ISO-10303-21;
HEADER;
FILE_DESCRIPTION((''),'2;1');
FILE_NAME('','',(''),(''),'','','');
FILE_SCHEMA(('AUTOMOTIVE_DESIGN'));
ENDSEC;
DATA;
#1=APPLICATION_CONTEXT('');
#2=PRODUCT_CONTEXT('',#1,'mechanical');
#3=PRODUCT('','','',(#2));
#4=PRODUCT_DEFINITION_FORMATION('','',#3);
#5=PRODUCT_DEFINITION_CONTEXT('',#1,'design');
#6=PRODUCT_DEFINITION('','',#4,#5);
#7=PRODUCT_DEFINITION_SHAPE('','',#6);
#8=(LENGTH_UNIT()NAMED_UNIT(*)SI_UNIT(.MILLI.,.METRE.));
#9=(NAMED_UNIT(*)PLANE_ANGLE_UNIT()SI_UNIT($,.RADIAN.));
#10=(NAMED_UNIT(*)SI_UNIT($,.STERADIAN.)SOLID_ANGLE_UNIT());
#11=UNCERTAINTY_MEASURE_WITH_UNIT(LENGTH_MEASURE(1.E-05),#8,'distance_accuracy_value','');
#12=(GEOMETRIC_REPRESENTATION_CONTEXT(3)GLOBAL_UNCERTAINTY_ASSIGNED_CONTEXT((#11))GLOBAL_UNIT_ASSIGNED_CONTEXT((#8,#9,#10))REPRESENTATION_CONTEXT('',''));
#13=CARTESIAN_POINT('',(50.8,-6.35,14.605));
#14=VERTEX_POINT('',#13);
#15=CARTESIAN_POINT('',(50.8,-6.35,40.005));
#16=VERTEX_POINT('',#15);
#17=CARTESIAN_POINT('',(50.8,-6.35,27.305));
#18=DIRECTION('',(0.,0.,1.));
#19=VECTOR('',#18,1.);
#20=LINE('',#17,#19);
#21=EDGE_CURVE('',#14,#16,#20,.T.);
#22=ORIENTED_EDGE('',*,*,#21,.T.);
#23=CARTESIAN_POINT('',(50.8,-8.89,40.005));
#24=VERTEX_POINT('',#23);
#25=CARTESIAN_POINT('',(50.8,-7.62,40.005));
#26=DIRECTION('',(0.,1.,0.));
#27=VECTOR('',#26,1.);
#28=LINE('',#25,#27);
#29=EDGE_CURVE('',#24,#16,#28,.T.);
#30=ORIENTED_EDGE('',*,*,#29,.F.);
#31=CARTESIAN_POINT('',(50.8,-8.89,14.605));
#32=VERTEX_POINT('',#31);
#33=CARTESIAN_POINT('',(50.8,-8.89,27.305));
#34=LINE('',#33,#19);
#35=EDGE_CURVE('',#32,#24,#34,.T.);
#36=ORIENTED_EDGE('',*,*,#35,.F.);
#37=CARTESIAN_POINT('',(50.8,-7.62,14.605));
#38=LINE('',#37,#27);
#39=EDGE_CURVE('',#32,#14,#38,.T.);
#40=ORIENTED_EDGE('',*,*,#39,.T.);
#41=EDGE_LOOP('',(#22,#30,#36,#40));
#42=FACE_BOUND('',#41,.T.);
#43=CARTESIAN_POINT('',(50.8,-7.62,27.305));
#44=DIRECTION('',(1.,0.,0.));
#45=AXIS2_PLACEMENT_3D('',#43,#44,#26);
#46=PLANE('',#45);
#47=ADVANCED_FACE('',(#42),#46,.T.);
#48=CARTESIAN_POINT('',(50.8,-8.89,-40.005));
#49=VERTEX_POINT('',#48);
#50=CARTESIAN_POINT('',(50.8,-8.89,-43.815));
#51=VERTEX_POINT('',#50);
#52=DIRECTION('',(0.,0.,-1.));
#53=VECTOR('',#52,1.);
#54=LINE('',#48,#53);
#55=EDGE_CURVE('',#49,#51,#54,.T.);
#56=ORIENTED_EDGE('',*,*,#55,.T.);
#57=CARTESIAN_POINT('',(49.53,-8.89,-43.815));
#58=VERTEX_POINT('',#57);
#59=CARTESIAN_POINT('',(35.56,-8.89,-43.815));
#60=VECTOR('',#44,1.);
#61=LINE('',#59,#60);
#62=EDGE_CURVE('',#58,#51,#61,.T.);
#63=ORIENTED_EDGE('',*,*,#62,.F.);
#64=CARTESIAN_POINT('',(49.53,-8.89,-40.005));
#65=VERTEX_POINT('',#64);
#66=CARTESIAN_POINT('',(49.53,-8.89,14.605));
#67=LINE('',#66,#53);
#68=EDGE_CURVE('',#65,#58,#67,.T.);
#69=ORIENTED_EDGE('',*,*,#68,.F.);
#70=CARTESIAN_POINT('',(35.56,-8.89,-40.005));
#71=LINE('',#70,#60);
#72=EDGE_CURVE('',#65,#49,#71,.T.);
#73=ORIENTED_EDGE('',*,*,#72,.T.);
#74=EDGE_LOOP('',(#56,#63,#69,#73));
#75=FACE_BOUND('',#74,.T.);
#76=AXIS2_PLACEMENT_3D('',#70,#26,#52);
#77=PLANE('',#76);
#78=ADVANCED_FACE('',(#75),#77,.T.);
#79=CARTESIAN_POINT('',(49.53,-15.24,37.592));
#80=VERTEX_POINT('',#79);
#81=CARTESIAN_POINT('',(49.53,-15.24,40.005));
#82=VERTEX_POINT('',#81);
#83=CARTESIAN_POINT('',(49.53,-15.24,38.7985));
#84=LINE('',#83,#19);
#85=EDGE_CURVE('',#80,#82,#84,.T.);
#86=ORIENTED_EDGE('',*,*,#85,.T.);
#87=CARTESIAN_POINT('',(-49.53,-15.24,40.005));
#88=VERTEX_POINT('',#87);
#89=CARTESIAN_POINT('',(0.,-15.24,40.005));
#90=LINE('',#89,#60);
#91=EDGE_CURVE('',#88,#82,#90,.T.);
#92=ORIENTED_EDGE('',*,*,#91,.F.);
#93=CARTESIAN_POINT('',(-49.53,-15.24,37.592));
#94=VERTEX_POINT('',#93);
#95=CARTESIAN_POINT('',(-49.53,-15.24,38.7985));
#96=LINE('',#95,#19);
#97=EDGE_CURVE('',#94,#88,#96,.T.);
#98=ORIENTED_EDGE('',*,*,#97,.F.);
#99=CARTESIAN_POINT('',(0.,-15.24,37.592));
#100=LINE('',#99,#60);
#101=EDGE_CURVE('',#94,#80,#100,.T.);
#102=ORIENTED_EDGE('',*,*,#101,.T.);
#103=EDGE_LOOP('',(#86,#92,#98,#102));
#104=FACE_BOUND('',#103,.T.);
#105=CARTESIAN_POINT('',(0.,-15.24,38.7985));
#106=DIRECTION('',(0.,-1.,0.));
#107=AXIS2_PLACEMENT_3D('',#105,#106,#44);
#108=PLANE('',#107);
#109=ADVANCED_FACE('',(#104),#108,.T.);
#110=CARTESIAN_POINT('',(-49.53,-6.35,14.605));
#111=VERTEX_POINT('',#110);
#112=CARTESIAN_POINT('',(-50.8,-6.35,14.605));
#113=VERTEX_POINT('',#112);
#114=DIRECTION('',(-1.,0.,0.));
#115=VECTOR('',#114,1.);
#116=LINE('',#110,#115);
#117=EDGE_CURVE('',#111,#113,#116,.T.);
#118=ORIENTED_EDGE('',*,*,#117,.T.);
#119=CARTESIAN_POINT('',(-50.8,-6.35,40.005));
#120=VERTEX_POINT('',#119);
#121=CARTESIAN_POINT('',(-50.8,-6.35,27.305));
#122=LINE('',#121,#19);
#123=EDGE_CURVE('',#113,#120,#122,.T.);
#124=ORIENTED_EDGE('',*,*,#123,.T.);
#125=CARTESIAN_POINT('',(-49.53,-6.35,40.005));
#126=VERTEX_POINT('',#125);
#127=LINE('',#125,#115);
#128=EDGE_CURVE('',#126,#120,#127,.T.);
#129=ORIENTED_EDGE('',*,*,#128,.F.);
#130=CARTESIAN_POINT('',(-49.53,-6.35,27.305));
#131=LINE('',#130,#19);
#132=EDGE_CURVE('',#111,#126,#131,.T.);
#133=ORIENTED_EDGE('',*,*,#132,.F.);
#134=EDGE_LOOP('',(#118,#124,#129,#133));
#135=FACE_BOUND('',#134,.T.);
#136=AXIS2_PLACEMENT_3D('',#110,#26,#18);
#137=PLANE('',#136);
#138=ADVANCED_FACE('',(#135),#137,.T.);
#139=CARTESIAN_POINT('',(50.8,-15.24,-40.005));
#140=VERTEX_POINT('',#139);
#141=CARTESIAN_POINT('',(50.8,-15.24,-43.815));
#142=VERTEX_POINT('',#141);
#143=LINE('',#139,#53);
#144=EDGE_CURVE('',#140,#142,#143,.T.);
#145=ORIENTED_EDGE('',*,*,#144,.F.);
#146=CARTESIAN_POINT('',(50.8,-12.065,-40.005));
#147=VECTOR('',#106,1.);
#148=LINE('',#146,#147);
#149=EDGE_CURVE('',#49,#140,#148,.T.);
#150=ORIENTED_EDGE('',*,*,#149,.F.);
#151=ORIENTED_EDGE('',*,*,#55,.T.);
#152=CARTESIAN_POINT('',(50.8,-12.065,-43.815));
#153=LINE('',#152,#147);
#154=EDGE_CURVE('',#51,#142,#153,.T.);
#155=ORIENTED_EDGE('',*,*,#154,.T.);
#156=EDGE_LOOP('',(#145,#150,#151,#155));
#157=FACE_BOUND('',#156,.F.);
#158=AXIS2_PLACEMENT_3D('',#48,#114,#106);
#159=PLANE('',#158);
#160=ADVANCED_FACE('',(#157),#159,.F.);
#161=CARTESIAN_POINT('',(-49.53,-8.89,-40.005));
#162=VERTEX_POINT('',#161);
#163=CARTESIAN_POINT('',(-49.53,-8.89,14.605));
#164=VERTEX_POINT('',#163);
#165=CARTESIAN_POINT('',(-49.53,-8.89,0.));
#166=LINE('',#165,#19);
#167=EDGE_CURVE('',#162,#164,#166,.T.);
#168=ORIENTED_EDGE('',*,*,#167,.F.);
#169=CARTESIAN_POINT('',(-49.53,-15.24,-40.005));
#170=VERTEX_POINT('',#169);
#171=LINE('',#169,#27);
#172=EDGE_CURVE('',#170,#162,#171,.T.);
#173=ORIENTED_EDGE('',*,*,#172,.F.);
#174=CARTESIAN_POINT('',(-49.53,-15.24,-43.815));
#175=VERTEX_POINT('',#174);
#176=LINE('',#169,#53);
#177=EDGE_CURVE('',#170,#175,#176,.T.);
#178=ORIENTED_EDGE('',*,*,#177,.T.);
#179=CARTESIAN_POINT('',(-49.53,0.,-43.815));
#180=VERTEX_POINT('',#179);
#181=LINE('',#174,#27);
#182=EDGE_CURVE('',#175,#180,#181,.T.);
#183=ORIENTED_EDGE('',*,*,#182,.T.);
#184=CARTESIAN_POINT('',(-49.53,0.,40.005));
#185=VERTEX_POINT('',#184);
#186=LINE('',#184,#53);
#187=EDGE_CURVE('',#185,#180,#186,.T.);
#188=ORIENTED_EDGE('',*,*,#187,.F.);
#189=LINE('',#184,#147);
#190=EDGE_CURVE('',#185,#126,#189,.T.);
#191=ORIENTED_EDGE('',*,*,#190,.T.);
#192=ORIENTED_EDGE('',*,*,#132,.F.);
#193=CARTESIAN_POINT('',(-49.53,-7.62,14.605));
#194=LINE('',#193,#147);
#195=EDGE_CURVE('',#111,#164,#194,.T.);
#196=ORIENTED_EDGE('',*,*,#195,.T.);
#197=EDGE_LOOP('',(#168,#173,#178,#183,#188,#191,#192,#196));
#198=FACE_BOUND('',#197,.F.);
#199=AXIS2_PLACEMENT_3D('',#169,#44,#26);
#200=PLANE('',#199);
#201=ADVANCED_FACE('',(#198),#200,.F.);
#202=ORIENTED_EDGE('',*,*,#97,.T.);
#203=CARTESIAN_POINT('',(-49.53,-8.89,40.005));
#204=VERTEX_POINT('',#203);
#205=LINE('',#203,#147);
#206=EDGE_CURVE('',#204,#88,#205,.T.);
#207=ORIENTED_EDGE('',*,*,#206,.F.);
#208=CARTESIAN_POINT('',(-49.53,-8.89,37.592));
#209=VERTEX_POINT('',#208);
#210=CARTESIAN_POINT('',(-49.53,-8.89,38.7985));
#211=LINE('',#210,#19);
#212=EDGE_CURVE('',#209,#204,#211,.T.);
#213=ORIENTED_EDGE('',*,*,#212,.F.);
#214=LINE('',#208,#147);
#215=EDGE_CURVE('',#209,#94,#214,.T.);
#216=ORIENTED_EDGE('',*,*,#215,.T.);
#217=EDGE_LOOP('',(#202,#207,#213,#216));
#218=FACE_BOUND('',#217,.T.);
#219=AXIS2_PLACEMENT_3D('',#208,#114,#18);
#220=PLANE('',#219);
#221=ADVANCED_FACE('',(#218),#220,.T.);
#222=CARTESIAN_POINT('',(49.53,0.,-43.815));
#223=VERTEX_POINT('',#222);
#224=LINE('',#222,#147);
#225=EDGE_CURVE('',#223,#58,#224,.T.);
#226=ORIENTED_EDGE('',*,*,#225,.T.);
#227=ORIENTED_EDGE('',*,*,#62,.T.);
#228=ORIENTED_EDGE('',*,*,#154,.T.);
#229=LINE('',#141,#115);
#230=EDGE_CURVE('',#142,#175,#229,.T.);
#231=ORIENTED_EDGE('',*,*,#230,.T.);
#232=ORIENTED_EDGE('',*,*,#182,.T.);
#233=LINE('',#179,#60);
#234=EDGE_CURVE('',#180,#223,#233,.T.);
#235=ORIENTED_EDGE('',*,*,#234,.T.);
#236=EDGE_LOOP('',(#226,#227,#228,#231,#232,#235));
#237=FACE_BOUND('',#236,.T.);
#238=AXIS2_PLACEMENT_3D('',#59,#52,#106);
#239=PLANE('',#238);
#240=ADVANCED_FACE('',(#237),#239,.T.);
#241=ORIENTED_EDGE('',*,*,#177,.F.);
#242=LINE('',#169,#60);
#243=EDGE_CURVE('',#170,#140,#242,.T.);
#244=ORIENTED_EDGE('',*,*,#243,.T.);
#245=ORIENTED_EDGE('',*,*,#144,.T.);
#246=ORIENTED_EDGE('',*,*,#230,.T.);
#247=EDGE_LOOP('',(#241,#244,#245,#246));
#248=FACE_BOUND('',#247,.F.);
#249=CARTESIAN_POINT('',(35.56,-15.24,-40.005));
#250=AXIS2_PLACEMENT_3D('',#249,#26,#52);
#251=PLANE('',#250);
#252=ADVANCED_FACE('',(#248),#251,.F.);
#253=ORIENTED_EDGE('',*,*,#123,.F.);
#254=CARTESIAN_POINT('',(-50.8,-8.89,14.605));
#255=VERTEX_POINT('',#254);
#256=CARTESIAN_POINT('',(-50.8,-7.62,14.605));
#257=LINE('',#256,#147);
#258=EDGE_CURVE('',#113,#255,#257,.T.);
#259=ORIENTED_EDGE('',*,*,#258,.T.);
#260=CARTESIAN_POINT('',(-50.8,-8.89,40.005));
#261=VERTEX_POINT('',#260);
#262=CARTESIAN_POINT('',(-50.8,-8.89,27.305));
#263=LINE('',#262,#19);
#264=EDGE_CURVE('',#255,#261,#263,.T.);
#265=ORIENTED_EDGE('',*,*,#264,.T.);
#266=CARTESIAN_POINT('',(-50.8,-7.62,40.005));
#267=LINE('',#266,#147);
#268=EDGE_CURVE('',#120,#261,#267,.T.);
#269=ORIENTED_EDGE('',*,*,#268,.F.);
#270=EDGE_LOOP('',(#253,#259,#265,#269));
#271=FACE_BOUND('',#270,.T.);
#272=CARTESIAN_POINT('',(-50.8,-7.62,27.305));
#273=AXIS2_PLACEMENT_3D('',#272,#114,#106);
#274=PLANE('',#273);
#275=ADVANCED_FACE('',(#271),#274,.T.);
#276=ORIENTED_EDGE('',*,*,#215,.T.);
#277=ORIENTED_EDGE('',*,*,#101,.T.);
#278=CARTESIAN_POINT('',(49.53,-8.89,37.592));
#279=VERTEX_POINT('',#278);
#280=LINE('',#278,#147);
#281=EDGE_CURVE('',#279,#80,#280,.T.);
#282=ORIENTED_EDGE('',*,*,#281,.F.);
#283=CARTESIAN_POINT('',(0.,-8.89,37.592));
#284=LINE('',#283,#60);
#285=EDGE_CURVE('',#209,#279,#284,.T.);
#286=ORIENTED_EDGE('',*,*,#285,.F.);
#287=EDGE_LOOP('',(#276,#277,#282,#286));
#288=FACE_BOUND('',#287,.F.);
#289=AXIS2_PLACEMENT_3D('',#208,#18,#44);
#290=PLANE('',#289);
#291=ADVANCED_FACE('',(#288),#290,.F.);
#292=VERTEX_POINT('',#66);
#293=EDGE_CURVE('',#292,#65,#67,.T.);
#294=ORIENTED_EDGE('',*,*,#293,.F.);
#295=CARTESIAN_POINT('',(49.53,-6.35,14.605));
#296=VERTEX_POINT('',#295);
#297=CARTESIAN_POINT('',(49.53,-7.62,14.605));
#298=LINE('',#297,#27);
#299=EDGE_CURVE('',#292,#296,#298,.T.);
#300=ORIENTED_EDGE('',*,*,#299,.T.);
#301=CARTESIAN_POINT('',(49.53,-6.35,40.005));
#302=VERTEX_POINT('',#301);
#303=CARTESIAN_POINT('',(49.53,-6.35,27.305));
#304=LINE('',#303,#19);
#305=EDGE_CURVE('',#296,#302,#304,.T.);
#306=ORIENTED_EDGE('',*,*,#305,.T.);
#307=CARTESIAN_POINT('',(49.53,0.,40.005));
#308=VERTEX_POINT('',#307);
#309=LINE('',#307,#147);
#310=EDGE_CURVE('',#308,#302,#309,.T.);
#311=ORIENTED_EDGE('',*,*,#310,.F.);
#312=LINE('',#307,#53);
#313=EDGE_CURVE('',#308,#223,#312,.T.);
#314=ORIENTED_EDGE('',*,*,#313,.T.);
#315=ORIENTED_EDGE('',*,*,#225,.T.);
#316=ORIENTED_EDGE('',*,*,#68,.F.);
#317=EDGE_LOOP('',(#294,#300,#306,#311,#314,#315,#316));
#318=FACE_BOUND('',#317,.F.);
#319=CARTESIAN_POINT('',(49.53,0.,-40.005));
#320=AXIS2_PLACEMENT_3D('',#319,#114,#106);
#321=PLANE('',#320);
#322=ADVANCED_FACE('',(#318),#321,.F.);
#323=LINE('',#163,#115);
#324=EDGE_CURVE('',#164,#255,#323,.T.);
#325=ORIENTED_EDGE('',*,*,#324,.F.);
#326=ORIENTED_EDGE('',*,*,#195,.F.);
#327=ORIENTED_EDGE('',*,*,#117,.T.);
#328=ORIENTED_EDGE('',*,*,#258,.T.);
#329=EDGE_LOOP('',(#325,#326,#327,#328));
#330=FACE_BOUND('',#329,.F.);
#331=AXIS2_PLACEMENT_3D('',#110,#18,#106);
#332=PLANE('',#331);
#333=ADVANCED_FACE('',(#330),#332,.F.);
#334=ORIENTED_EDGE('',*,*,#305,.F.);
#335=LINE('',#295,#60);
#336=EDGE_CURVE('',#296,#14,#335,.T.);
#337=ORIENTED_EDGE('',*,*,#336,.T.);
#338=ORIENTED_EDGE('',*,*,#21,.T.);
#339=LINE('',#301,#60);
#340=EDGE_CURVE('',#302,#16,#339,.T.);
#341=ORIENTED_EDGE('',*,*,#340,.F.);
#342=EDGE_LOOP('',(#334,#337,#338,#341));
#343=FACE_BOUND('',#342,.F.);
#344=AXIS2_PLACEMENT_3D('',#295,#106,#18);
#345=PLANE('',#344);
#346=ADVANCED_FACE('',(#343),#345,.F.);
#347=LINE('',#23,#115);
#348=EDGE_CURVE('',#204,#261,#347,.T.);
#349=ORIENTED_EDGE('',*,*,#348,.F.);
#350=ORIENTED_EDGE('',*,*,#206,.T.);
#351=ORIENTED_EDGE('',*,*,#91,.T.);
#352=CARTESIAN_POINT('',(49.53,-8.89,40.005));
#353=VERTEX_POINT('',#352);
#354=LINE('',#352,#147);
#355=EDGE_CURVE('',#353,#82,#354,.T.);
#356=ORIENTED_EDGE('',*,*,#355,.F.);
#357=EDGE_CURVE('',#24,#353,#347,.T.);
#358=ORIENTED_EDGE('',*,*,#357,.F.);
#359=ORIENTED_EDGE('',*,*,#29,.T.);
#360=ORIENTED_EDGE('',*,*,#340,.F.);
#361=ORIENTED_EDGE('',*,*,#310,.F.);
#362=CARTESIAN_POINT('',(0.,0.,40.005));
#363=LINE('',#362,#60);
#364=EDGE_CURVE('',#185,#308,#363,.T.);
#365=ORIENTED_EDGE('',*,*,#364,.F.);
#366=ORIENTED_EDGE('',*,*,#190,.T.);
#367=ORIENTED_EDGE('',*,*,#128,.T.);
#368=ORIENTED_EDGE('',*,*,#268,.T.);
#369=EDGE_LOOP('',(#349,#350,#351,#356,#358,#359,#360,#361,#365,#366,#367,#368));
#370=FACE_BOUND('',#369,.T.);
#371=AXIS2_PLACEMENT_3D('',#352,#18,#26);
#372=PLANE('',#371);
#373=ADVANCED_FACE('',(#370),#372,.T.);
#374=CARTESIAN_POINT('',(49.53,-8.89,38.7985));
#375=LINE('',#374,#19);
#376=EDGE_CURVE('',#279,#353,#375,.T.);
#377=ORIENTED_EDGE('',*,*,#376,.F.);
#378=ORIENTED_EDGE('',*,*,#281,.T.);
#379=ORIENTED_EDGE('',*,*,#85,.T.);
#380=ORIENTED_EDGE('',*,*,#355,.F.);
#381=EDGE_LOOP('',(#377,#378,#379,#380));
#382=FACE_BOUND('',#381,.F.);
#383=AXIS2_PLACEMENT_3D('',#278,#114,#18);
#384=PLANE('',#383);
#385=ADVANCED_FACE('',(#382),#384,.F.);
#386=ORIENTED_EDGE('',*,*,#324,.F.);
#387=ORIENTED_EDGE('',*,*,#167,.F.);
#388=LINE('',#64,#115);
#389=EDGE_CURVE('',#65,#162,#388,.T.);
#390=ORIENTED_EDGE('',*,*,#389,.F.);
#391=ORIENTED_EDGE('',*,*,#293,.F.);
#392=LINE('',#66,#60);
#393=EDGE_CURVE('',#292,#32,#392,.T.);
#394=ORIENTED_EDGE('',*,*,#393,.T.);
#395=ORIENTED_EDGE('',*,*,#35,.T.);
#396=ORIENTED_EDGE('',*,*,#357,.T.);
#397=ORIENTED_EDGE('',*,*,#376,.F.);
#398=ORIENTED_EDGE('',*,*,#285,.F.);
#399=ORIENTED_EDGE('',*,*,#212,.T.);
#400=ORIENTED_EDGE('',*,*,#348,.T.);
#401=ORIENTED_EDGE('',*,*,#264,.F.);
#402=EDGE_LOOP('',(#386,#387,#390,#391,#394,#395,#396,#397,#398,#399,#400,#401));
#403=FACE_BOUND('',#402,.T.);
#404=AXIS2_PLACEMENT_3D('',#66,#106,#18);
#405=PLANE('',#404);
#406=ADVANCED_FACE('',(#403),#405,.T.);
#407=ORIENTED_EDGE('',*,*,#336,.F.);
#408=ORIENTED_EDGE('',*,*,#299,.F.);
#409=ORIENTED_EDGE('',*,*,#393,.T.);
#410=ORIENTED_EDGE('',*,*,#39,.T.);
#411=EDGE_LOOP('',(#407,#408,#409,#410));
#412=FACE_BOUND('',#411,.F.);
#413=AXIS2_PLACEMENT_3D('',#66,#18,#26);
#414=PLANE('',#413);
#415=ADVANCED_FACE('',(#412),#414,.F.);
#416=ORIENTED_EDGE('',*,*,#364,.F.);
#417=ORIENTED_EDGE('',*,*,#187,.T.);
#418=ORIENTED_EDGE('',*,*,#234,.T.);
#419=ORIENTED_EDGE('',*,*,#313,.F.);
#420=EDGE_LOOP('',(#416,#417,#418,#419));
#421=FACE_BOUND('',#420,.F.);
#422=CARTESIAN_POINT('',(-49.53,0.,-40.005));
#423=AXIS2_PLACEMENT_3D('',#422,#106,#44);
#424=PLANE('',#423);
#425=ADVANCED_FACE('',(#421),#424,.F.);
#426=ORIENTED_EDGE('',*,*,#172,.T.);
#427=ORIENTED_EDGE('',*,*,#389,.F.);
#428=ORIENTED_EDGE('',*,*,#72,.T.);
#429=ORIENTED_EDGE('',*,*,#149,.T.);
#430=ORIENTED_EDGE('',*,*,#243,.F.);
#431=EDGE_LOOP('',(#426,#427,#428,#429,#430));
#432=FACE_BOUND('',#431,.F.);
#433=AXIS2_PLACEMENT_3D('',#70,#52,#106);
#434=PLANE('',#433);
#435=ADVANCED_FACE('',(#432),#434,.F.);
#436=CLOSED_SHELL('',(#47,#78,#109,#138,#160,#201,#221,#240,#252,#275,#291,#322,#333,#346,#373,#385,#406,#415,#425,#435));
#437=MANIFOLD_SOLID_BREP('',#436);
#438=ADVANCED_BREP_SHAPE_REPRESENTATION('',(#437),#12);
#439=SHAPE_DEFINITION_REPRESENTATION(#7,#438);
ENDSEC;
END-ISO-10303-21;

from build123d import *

# Parameters (mm, degrees)
F0_W      = 99.06
F0_H      = 80.01
F1_DEPTH  = 8.89
F3_W      = 2.54
F3_H      = 25.4
F4_DEPTH  = 1.27
F2_W      = 2.54
F2_H      = 25.4
F5_DEPTH  = 1.27
F6_W      = 85.09
F6_H      = 6.35
F7_DEPTH  = 3.81
F8_W      = 99.06
F8_H      = 2.413
F9_DEPTH  = 6.35
F10_DEPTH = 15.24


# Not quite as in the source:
# - a feature names something its author has since deleted; it is built from what else it names


with BuildPart() as f1:
    # F0 (on Front) → F1 (new body)
    with BuildSketch(Plane.XZ):
        Rectangle(F0_W, F0_H)
    extrude(amount=F1_DEPTH)

    # F3 (on face) → F4 (join)
    with BuildSketch(Plane(origin=(-49.53, 0, 0), x_dir=(0, -1, 0), z_dir=(-1, 0, 0))):
        with Locations((7.62, 27.305)):
            Rectangle(F3_W, F3_H)
    extrude(amount=F4_DEPTH)

    # F2 (on face) → F5 (join)
    with BuildSketch(Plane.YZ.offset(49.53)):
        with Locations((-7.62, 27.305)):
            Rectangle(F2_W, F2_H)
    extrude(amount=F5_DEPTH)

    # F6 (on face) → F7 (join)
    with BuildSketch(Plane(origin=(0, 0, -40.005), x_dir=(1, 0, 0), z_dir=(0, 0, -1))):
        with Locations((-6.985, 12.065)):
            Rectangle(F6_W, F6_H)
        Polygon((35.56, 8.89), (-49.53, 8.89), (-49.53, 0), (49.53, 0), (49.53, 8.89), align=None)
    extrude(amount=F7_DEPTH)

    # F8 (on face) → F9 (join)
    with BuildSketch(Plane.XZ.offset(8.89)):
        with Locations((0, 38.7985)):
            Rectangle(F8_W, F8_H)
    extrude(amount=F9_DEPTH)

    # F10 (add): a face of the model
    f10_faces = [f1.faces().sort_by_distance(p)[0] for p in [
        (35.56, -12.065, -41.91),
    ]]
    extrude(f10_faces, amount=F10_DEPTH)


solid = f1.part
